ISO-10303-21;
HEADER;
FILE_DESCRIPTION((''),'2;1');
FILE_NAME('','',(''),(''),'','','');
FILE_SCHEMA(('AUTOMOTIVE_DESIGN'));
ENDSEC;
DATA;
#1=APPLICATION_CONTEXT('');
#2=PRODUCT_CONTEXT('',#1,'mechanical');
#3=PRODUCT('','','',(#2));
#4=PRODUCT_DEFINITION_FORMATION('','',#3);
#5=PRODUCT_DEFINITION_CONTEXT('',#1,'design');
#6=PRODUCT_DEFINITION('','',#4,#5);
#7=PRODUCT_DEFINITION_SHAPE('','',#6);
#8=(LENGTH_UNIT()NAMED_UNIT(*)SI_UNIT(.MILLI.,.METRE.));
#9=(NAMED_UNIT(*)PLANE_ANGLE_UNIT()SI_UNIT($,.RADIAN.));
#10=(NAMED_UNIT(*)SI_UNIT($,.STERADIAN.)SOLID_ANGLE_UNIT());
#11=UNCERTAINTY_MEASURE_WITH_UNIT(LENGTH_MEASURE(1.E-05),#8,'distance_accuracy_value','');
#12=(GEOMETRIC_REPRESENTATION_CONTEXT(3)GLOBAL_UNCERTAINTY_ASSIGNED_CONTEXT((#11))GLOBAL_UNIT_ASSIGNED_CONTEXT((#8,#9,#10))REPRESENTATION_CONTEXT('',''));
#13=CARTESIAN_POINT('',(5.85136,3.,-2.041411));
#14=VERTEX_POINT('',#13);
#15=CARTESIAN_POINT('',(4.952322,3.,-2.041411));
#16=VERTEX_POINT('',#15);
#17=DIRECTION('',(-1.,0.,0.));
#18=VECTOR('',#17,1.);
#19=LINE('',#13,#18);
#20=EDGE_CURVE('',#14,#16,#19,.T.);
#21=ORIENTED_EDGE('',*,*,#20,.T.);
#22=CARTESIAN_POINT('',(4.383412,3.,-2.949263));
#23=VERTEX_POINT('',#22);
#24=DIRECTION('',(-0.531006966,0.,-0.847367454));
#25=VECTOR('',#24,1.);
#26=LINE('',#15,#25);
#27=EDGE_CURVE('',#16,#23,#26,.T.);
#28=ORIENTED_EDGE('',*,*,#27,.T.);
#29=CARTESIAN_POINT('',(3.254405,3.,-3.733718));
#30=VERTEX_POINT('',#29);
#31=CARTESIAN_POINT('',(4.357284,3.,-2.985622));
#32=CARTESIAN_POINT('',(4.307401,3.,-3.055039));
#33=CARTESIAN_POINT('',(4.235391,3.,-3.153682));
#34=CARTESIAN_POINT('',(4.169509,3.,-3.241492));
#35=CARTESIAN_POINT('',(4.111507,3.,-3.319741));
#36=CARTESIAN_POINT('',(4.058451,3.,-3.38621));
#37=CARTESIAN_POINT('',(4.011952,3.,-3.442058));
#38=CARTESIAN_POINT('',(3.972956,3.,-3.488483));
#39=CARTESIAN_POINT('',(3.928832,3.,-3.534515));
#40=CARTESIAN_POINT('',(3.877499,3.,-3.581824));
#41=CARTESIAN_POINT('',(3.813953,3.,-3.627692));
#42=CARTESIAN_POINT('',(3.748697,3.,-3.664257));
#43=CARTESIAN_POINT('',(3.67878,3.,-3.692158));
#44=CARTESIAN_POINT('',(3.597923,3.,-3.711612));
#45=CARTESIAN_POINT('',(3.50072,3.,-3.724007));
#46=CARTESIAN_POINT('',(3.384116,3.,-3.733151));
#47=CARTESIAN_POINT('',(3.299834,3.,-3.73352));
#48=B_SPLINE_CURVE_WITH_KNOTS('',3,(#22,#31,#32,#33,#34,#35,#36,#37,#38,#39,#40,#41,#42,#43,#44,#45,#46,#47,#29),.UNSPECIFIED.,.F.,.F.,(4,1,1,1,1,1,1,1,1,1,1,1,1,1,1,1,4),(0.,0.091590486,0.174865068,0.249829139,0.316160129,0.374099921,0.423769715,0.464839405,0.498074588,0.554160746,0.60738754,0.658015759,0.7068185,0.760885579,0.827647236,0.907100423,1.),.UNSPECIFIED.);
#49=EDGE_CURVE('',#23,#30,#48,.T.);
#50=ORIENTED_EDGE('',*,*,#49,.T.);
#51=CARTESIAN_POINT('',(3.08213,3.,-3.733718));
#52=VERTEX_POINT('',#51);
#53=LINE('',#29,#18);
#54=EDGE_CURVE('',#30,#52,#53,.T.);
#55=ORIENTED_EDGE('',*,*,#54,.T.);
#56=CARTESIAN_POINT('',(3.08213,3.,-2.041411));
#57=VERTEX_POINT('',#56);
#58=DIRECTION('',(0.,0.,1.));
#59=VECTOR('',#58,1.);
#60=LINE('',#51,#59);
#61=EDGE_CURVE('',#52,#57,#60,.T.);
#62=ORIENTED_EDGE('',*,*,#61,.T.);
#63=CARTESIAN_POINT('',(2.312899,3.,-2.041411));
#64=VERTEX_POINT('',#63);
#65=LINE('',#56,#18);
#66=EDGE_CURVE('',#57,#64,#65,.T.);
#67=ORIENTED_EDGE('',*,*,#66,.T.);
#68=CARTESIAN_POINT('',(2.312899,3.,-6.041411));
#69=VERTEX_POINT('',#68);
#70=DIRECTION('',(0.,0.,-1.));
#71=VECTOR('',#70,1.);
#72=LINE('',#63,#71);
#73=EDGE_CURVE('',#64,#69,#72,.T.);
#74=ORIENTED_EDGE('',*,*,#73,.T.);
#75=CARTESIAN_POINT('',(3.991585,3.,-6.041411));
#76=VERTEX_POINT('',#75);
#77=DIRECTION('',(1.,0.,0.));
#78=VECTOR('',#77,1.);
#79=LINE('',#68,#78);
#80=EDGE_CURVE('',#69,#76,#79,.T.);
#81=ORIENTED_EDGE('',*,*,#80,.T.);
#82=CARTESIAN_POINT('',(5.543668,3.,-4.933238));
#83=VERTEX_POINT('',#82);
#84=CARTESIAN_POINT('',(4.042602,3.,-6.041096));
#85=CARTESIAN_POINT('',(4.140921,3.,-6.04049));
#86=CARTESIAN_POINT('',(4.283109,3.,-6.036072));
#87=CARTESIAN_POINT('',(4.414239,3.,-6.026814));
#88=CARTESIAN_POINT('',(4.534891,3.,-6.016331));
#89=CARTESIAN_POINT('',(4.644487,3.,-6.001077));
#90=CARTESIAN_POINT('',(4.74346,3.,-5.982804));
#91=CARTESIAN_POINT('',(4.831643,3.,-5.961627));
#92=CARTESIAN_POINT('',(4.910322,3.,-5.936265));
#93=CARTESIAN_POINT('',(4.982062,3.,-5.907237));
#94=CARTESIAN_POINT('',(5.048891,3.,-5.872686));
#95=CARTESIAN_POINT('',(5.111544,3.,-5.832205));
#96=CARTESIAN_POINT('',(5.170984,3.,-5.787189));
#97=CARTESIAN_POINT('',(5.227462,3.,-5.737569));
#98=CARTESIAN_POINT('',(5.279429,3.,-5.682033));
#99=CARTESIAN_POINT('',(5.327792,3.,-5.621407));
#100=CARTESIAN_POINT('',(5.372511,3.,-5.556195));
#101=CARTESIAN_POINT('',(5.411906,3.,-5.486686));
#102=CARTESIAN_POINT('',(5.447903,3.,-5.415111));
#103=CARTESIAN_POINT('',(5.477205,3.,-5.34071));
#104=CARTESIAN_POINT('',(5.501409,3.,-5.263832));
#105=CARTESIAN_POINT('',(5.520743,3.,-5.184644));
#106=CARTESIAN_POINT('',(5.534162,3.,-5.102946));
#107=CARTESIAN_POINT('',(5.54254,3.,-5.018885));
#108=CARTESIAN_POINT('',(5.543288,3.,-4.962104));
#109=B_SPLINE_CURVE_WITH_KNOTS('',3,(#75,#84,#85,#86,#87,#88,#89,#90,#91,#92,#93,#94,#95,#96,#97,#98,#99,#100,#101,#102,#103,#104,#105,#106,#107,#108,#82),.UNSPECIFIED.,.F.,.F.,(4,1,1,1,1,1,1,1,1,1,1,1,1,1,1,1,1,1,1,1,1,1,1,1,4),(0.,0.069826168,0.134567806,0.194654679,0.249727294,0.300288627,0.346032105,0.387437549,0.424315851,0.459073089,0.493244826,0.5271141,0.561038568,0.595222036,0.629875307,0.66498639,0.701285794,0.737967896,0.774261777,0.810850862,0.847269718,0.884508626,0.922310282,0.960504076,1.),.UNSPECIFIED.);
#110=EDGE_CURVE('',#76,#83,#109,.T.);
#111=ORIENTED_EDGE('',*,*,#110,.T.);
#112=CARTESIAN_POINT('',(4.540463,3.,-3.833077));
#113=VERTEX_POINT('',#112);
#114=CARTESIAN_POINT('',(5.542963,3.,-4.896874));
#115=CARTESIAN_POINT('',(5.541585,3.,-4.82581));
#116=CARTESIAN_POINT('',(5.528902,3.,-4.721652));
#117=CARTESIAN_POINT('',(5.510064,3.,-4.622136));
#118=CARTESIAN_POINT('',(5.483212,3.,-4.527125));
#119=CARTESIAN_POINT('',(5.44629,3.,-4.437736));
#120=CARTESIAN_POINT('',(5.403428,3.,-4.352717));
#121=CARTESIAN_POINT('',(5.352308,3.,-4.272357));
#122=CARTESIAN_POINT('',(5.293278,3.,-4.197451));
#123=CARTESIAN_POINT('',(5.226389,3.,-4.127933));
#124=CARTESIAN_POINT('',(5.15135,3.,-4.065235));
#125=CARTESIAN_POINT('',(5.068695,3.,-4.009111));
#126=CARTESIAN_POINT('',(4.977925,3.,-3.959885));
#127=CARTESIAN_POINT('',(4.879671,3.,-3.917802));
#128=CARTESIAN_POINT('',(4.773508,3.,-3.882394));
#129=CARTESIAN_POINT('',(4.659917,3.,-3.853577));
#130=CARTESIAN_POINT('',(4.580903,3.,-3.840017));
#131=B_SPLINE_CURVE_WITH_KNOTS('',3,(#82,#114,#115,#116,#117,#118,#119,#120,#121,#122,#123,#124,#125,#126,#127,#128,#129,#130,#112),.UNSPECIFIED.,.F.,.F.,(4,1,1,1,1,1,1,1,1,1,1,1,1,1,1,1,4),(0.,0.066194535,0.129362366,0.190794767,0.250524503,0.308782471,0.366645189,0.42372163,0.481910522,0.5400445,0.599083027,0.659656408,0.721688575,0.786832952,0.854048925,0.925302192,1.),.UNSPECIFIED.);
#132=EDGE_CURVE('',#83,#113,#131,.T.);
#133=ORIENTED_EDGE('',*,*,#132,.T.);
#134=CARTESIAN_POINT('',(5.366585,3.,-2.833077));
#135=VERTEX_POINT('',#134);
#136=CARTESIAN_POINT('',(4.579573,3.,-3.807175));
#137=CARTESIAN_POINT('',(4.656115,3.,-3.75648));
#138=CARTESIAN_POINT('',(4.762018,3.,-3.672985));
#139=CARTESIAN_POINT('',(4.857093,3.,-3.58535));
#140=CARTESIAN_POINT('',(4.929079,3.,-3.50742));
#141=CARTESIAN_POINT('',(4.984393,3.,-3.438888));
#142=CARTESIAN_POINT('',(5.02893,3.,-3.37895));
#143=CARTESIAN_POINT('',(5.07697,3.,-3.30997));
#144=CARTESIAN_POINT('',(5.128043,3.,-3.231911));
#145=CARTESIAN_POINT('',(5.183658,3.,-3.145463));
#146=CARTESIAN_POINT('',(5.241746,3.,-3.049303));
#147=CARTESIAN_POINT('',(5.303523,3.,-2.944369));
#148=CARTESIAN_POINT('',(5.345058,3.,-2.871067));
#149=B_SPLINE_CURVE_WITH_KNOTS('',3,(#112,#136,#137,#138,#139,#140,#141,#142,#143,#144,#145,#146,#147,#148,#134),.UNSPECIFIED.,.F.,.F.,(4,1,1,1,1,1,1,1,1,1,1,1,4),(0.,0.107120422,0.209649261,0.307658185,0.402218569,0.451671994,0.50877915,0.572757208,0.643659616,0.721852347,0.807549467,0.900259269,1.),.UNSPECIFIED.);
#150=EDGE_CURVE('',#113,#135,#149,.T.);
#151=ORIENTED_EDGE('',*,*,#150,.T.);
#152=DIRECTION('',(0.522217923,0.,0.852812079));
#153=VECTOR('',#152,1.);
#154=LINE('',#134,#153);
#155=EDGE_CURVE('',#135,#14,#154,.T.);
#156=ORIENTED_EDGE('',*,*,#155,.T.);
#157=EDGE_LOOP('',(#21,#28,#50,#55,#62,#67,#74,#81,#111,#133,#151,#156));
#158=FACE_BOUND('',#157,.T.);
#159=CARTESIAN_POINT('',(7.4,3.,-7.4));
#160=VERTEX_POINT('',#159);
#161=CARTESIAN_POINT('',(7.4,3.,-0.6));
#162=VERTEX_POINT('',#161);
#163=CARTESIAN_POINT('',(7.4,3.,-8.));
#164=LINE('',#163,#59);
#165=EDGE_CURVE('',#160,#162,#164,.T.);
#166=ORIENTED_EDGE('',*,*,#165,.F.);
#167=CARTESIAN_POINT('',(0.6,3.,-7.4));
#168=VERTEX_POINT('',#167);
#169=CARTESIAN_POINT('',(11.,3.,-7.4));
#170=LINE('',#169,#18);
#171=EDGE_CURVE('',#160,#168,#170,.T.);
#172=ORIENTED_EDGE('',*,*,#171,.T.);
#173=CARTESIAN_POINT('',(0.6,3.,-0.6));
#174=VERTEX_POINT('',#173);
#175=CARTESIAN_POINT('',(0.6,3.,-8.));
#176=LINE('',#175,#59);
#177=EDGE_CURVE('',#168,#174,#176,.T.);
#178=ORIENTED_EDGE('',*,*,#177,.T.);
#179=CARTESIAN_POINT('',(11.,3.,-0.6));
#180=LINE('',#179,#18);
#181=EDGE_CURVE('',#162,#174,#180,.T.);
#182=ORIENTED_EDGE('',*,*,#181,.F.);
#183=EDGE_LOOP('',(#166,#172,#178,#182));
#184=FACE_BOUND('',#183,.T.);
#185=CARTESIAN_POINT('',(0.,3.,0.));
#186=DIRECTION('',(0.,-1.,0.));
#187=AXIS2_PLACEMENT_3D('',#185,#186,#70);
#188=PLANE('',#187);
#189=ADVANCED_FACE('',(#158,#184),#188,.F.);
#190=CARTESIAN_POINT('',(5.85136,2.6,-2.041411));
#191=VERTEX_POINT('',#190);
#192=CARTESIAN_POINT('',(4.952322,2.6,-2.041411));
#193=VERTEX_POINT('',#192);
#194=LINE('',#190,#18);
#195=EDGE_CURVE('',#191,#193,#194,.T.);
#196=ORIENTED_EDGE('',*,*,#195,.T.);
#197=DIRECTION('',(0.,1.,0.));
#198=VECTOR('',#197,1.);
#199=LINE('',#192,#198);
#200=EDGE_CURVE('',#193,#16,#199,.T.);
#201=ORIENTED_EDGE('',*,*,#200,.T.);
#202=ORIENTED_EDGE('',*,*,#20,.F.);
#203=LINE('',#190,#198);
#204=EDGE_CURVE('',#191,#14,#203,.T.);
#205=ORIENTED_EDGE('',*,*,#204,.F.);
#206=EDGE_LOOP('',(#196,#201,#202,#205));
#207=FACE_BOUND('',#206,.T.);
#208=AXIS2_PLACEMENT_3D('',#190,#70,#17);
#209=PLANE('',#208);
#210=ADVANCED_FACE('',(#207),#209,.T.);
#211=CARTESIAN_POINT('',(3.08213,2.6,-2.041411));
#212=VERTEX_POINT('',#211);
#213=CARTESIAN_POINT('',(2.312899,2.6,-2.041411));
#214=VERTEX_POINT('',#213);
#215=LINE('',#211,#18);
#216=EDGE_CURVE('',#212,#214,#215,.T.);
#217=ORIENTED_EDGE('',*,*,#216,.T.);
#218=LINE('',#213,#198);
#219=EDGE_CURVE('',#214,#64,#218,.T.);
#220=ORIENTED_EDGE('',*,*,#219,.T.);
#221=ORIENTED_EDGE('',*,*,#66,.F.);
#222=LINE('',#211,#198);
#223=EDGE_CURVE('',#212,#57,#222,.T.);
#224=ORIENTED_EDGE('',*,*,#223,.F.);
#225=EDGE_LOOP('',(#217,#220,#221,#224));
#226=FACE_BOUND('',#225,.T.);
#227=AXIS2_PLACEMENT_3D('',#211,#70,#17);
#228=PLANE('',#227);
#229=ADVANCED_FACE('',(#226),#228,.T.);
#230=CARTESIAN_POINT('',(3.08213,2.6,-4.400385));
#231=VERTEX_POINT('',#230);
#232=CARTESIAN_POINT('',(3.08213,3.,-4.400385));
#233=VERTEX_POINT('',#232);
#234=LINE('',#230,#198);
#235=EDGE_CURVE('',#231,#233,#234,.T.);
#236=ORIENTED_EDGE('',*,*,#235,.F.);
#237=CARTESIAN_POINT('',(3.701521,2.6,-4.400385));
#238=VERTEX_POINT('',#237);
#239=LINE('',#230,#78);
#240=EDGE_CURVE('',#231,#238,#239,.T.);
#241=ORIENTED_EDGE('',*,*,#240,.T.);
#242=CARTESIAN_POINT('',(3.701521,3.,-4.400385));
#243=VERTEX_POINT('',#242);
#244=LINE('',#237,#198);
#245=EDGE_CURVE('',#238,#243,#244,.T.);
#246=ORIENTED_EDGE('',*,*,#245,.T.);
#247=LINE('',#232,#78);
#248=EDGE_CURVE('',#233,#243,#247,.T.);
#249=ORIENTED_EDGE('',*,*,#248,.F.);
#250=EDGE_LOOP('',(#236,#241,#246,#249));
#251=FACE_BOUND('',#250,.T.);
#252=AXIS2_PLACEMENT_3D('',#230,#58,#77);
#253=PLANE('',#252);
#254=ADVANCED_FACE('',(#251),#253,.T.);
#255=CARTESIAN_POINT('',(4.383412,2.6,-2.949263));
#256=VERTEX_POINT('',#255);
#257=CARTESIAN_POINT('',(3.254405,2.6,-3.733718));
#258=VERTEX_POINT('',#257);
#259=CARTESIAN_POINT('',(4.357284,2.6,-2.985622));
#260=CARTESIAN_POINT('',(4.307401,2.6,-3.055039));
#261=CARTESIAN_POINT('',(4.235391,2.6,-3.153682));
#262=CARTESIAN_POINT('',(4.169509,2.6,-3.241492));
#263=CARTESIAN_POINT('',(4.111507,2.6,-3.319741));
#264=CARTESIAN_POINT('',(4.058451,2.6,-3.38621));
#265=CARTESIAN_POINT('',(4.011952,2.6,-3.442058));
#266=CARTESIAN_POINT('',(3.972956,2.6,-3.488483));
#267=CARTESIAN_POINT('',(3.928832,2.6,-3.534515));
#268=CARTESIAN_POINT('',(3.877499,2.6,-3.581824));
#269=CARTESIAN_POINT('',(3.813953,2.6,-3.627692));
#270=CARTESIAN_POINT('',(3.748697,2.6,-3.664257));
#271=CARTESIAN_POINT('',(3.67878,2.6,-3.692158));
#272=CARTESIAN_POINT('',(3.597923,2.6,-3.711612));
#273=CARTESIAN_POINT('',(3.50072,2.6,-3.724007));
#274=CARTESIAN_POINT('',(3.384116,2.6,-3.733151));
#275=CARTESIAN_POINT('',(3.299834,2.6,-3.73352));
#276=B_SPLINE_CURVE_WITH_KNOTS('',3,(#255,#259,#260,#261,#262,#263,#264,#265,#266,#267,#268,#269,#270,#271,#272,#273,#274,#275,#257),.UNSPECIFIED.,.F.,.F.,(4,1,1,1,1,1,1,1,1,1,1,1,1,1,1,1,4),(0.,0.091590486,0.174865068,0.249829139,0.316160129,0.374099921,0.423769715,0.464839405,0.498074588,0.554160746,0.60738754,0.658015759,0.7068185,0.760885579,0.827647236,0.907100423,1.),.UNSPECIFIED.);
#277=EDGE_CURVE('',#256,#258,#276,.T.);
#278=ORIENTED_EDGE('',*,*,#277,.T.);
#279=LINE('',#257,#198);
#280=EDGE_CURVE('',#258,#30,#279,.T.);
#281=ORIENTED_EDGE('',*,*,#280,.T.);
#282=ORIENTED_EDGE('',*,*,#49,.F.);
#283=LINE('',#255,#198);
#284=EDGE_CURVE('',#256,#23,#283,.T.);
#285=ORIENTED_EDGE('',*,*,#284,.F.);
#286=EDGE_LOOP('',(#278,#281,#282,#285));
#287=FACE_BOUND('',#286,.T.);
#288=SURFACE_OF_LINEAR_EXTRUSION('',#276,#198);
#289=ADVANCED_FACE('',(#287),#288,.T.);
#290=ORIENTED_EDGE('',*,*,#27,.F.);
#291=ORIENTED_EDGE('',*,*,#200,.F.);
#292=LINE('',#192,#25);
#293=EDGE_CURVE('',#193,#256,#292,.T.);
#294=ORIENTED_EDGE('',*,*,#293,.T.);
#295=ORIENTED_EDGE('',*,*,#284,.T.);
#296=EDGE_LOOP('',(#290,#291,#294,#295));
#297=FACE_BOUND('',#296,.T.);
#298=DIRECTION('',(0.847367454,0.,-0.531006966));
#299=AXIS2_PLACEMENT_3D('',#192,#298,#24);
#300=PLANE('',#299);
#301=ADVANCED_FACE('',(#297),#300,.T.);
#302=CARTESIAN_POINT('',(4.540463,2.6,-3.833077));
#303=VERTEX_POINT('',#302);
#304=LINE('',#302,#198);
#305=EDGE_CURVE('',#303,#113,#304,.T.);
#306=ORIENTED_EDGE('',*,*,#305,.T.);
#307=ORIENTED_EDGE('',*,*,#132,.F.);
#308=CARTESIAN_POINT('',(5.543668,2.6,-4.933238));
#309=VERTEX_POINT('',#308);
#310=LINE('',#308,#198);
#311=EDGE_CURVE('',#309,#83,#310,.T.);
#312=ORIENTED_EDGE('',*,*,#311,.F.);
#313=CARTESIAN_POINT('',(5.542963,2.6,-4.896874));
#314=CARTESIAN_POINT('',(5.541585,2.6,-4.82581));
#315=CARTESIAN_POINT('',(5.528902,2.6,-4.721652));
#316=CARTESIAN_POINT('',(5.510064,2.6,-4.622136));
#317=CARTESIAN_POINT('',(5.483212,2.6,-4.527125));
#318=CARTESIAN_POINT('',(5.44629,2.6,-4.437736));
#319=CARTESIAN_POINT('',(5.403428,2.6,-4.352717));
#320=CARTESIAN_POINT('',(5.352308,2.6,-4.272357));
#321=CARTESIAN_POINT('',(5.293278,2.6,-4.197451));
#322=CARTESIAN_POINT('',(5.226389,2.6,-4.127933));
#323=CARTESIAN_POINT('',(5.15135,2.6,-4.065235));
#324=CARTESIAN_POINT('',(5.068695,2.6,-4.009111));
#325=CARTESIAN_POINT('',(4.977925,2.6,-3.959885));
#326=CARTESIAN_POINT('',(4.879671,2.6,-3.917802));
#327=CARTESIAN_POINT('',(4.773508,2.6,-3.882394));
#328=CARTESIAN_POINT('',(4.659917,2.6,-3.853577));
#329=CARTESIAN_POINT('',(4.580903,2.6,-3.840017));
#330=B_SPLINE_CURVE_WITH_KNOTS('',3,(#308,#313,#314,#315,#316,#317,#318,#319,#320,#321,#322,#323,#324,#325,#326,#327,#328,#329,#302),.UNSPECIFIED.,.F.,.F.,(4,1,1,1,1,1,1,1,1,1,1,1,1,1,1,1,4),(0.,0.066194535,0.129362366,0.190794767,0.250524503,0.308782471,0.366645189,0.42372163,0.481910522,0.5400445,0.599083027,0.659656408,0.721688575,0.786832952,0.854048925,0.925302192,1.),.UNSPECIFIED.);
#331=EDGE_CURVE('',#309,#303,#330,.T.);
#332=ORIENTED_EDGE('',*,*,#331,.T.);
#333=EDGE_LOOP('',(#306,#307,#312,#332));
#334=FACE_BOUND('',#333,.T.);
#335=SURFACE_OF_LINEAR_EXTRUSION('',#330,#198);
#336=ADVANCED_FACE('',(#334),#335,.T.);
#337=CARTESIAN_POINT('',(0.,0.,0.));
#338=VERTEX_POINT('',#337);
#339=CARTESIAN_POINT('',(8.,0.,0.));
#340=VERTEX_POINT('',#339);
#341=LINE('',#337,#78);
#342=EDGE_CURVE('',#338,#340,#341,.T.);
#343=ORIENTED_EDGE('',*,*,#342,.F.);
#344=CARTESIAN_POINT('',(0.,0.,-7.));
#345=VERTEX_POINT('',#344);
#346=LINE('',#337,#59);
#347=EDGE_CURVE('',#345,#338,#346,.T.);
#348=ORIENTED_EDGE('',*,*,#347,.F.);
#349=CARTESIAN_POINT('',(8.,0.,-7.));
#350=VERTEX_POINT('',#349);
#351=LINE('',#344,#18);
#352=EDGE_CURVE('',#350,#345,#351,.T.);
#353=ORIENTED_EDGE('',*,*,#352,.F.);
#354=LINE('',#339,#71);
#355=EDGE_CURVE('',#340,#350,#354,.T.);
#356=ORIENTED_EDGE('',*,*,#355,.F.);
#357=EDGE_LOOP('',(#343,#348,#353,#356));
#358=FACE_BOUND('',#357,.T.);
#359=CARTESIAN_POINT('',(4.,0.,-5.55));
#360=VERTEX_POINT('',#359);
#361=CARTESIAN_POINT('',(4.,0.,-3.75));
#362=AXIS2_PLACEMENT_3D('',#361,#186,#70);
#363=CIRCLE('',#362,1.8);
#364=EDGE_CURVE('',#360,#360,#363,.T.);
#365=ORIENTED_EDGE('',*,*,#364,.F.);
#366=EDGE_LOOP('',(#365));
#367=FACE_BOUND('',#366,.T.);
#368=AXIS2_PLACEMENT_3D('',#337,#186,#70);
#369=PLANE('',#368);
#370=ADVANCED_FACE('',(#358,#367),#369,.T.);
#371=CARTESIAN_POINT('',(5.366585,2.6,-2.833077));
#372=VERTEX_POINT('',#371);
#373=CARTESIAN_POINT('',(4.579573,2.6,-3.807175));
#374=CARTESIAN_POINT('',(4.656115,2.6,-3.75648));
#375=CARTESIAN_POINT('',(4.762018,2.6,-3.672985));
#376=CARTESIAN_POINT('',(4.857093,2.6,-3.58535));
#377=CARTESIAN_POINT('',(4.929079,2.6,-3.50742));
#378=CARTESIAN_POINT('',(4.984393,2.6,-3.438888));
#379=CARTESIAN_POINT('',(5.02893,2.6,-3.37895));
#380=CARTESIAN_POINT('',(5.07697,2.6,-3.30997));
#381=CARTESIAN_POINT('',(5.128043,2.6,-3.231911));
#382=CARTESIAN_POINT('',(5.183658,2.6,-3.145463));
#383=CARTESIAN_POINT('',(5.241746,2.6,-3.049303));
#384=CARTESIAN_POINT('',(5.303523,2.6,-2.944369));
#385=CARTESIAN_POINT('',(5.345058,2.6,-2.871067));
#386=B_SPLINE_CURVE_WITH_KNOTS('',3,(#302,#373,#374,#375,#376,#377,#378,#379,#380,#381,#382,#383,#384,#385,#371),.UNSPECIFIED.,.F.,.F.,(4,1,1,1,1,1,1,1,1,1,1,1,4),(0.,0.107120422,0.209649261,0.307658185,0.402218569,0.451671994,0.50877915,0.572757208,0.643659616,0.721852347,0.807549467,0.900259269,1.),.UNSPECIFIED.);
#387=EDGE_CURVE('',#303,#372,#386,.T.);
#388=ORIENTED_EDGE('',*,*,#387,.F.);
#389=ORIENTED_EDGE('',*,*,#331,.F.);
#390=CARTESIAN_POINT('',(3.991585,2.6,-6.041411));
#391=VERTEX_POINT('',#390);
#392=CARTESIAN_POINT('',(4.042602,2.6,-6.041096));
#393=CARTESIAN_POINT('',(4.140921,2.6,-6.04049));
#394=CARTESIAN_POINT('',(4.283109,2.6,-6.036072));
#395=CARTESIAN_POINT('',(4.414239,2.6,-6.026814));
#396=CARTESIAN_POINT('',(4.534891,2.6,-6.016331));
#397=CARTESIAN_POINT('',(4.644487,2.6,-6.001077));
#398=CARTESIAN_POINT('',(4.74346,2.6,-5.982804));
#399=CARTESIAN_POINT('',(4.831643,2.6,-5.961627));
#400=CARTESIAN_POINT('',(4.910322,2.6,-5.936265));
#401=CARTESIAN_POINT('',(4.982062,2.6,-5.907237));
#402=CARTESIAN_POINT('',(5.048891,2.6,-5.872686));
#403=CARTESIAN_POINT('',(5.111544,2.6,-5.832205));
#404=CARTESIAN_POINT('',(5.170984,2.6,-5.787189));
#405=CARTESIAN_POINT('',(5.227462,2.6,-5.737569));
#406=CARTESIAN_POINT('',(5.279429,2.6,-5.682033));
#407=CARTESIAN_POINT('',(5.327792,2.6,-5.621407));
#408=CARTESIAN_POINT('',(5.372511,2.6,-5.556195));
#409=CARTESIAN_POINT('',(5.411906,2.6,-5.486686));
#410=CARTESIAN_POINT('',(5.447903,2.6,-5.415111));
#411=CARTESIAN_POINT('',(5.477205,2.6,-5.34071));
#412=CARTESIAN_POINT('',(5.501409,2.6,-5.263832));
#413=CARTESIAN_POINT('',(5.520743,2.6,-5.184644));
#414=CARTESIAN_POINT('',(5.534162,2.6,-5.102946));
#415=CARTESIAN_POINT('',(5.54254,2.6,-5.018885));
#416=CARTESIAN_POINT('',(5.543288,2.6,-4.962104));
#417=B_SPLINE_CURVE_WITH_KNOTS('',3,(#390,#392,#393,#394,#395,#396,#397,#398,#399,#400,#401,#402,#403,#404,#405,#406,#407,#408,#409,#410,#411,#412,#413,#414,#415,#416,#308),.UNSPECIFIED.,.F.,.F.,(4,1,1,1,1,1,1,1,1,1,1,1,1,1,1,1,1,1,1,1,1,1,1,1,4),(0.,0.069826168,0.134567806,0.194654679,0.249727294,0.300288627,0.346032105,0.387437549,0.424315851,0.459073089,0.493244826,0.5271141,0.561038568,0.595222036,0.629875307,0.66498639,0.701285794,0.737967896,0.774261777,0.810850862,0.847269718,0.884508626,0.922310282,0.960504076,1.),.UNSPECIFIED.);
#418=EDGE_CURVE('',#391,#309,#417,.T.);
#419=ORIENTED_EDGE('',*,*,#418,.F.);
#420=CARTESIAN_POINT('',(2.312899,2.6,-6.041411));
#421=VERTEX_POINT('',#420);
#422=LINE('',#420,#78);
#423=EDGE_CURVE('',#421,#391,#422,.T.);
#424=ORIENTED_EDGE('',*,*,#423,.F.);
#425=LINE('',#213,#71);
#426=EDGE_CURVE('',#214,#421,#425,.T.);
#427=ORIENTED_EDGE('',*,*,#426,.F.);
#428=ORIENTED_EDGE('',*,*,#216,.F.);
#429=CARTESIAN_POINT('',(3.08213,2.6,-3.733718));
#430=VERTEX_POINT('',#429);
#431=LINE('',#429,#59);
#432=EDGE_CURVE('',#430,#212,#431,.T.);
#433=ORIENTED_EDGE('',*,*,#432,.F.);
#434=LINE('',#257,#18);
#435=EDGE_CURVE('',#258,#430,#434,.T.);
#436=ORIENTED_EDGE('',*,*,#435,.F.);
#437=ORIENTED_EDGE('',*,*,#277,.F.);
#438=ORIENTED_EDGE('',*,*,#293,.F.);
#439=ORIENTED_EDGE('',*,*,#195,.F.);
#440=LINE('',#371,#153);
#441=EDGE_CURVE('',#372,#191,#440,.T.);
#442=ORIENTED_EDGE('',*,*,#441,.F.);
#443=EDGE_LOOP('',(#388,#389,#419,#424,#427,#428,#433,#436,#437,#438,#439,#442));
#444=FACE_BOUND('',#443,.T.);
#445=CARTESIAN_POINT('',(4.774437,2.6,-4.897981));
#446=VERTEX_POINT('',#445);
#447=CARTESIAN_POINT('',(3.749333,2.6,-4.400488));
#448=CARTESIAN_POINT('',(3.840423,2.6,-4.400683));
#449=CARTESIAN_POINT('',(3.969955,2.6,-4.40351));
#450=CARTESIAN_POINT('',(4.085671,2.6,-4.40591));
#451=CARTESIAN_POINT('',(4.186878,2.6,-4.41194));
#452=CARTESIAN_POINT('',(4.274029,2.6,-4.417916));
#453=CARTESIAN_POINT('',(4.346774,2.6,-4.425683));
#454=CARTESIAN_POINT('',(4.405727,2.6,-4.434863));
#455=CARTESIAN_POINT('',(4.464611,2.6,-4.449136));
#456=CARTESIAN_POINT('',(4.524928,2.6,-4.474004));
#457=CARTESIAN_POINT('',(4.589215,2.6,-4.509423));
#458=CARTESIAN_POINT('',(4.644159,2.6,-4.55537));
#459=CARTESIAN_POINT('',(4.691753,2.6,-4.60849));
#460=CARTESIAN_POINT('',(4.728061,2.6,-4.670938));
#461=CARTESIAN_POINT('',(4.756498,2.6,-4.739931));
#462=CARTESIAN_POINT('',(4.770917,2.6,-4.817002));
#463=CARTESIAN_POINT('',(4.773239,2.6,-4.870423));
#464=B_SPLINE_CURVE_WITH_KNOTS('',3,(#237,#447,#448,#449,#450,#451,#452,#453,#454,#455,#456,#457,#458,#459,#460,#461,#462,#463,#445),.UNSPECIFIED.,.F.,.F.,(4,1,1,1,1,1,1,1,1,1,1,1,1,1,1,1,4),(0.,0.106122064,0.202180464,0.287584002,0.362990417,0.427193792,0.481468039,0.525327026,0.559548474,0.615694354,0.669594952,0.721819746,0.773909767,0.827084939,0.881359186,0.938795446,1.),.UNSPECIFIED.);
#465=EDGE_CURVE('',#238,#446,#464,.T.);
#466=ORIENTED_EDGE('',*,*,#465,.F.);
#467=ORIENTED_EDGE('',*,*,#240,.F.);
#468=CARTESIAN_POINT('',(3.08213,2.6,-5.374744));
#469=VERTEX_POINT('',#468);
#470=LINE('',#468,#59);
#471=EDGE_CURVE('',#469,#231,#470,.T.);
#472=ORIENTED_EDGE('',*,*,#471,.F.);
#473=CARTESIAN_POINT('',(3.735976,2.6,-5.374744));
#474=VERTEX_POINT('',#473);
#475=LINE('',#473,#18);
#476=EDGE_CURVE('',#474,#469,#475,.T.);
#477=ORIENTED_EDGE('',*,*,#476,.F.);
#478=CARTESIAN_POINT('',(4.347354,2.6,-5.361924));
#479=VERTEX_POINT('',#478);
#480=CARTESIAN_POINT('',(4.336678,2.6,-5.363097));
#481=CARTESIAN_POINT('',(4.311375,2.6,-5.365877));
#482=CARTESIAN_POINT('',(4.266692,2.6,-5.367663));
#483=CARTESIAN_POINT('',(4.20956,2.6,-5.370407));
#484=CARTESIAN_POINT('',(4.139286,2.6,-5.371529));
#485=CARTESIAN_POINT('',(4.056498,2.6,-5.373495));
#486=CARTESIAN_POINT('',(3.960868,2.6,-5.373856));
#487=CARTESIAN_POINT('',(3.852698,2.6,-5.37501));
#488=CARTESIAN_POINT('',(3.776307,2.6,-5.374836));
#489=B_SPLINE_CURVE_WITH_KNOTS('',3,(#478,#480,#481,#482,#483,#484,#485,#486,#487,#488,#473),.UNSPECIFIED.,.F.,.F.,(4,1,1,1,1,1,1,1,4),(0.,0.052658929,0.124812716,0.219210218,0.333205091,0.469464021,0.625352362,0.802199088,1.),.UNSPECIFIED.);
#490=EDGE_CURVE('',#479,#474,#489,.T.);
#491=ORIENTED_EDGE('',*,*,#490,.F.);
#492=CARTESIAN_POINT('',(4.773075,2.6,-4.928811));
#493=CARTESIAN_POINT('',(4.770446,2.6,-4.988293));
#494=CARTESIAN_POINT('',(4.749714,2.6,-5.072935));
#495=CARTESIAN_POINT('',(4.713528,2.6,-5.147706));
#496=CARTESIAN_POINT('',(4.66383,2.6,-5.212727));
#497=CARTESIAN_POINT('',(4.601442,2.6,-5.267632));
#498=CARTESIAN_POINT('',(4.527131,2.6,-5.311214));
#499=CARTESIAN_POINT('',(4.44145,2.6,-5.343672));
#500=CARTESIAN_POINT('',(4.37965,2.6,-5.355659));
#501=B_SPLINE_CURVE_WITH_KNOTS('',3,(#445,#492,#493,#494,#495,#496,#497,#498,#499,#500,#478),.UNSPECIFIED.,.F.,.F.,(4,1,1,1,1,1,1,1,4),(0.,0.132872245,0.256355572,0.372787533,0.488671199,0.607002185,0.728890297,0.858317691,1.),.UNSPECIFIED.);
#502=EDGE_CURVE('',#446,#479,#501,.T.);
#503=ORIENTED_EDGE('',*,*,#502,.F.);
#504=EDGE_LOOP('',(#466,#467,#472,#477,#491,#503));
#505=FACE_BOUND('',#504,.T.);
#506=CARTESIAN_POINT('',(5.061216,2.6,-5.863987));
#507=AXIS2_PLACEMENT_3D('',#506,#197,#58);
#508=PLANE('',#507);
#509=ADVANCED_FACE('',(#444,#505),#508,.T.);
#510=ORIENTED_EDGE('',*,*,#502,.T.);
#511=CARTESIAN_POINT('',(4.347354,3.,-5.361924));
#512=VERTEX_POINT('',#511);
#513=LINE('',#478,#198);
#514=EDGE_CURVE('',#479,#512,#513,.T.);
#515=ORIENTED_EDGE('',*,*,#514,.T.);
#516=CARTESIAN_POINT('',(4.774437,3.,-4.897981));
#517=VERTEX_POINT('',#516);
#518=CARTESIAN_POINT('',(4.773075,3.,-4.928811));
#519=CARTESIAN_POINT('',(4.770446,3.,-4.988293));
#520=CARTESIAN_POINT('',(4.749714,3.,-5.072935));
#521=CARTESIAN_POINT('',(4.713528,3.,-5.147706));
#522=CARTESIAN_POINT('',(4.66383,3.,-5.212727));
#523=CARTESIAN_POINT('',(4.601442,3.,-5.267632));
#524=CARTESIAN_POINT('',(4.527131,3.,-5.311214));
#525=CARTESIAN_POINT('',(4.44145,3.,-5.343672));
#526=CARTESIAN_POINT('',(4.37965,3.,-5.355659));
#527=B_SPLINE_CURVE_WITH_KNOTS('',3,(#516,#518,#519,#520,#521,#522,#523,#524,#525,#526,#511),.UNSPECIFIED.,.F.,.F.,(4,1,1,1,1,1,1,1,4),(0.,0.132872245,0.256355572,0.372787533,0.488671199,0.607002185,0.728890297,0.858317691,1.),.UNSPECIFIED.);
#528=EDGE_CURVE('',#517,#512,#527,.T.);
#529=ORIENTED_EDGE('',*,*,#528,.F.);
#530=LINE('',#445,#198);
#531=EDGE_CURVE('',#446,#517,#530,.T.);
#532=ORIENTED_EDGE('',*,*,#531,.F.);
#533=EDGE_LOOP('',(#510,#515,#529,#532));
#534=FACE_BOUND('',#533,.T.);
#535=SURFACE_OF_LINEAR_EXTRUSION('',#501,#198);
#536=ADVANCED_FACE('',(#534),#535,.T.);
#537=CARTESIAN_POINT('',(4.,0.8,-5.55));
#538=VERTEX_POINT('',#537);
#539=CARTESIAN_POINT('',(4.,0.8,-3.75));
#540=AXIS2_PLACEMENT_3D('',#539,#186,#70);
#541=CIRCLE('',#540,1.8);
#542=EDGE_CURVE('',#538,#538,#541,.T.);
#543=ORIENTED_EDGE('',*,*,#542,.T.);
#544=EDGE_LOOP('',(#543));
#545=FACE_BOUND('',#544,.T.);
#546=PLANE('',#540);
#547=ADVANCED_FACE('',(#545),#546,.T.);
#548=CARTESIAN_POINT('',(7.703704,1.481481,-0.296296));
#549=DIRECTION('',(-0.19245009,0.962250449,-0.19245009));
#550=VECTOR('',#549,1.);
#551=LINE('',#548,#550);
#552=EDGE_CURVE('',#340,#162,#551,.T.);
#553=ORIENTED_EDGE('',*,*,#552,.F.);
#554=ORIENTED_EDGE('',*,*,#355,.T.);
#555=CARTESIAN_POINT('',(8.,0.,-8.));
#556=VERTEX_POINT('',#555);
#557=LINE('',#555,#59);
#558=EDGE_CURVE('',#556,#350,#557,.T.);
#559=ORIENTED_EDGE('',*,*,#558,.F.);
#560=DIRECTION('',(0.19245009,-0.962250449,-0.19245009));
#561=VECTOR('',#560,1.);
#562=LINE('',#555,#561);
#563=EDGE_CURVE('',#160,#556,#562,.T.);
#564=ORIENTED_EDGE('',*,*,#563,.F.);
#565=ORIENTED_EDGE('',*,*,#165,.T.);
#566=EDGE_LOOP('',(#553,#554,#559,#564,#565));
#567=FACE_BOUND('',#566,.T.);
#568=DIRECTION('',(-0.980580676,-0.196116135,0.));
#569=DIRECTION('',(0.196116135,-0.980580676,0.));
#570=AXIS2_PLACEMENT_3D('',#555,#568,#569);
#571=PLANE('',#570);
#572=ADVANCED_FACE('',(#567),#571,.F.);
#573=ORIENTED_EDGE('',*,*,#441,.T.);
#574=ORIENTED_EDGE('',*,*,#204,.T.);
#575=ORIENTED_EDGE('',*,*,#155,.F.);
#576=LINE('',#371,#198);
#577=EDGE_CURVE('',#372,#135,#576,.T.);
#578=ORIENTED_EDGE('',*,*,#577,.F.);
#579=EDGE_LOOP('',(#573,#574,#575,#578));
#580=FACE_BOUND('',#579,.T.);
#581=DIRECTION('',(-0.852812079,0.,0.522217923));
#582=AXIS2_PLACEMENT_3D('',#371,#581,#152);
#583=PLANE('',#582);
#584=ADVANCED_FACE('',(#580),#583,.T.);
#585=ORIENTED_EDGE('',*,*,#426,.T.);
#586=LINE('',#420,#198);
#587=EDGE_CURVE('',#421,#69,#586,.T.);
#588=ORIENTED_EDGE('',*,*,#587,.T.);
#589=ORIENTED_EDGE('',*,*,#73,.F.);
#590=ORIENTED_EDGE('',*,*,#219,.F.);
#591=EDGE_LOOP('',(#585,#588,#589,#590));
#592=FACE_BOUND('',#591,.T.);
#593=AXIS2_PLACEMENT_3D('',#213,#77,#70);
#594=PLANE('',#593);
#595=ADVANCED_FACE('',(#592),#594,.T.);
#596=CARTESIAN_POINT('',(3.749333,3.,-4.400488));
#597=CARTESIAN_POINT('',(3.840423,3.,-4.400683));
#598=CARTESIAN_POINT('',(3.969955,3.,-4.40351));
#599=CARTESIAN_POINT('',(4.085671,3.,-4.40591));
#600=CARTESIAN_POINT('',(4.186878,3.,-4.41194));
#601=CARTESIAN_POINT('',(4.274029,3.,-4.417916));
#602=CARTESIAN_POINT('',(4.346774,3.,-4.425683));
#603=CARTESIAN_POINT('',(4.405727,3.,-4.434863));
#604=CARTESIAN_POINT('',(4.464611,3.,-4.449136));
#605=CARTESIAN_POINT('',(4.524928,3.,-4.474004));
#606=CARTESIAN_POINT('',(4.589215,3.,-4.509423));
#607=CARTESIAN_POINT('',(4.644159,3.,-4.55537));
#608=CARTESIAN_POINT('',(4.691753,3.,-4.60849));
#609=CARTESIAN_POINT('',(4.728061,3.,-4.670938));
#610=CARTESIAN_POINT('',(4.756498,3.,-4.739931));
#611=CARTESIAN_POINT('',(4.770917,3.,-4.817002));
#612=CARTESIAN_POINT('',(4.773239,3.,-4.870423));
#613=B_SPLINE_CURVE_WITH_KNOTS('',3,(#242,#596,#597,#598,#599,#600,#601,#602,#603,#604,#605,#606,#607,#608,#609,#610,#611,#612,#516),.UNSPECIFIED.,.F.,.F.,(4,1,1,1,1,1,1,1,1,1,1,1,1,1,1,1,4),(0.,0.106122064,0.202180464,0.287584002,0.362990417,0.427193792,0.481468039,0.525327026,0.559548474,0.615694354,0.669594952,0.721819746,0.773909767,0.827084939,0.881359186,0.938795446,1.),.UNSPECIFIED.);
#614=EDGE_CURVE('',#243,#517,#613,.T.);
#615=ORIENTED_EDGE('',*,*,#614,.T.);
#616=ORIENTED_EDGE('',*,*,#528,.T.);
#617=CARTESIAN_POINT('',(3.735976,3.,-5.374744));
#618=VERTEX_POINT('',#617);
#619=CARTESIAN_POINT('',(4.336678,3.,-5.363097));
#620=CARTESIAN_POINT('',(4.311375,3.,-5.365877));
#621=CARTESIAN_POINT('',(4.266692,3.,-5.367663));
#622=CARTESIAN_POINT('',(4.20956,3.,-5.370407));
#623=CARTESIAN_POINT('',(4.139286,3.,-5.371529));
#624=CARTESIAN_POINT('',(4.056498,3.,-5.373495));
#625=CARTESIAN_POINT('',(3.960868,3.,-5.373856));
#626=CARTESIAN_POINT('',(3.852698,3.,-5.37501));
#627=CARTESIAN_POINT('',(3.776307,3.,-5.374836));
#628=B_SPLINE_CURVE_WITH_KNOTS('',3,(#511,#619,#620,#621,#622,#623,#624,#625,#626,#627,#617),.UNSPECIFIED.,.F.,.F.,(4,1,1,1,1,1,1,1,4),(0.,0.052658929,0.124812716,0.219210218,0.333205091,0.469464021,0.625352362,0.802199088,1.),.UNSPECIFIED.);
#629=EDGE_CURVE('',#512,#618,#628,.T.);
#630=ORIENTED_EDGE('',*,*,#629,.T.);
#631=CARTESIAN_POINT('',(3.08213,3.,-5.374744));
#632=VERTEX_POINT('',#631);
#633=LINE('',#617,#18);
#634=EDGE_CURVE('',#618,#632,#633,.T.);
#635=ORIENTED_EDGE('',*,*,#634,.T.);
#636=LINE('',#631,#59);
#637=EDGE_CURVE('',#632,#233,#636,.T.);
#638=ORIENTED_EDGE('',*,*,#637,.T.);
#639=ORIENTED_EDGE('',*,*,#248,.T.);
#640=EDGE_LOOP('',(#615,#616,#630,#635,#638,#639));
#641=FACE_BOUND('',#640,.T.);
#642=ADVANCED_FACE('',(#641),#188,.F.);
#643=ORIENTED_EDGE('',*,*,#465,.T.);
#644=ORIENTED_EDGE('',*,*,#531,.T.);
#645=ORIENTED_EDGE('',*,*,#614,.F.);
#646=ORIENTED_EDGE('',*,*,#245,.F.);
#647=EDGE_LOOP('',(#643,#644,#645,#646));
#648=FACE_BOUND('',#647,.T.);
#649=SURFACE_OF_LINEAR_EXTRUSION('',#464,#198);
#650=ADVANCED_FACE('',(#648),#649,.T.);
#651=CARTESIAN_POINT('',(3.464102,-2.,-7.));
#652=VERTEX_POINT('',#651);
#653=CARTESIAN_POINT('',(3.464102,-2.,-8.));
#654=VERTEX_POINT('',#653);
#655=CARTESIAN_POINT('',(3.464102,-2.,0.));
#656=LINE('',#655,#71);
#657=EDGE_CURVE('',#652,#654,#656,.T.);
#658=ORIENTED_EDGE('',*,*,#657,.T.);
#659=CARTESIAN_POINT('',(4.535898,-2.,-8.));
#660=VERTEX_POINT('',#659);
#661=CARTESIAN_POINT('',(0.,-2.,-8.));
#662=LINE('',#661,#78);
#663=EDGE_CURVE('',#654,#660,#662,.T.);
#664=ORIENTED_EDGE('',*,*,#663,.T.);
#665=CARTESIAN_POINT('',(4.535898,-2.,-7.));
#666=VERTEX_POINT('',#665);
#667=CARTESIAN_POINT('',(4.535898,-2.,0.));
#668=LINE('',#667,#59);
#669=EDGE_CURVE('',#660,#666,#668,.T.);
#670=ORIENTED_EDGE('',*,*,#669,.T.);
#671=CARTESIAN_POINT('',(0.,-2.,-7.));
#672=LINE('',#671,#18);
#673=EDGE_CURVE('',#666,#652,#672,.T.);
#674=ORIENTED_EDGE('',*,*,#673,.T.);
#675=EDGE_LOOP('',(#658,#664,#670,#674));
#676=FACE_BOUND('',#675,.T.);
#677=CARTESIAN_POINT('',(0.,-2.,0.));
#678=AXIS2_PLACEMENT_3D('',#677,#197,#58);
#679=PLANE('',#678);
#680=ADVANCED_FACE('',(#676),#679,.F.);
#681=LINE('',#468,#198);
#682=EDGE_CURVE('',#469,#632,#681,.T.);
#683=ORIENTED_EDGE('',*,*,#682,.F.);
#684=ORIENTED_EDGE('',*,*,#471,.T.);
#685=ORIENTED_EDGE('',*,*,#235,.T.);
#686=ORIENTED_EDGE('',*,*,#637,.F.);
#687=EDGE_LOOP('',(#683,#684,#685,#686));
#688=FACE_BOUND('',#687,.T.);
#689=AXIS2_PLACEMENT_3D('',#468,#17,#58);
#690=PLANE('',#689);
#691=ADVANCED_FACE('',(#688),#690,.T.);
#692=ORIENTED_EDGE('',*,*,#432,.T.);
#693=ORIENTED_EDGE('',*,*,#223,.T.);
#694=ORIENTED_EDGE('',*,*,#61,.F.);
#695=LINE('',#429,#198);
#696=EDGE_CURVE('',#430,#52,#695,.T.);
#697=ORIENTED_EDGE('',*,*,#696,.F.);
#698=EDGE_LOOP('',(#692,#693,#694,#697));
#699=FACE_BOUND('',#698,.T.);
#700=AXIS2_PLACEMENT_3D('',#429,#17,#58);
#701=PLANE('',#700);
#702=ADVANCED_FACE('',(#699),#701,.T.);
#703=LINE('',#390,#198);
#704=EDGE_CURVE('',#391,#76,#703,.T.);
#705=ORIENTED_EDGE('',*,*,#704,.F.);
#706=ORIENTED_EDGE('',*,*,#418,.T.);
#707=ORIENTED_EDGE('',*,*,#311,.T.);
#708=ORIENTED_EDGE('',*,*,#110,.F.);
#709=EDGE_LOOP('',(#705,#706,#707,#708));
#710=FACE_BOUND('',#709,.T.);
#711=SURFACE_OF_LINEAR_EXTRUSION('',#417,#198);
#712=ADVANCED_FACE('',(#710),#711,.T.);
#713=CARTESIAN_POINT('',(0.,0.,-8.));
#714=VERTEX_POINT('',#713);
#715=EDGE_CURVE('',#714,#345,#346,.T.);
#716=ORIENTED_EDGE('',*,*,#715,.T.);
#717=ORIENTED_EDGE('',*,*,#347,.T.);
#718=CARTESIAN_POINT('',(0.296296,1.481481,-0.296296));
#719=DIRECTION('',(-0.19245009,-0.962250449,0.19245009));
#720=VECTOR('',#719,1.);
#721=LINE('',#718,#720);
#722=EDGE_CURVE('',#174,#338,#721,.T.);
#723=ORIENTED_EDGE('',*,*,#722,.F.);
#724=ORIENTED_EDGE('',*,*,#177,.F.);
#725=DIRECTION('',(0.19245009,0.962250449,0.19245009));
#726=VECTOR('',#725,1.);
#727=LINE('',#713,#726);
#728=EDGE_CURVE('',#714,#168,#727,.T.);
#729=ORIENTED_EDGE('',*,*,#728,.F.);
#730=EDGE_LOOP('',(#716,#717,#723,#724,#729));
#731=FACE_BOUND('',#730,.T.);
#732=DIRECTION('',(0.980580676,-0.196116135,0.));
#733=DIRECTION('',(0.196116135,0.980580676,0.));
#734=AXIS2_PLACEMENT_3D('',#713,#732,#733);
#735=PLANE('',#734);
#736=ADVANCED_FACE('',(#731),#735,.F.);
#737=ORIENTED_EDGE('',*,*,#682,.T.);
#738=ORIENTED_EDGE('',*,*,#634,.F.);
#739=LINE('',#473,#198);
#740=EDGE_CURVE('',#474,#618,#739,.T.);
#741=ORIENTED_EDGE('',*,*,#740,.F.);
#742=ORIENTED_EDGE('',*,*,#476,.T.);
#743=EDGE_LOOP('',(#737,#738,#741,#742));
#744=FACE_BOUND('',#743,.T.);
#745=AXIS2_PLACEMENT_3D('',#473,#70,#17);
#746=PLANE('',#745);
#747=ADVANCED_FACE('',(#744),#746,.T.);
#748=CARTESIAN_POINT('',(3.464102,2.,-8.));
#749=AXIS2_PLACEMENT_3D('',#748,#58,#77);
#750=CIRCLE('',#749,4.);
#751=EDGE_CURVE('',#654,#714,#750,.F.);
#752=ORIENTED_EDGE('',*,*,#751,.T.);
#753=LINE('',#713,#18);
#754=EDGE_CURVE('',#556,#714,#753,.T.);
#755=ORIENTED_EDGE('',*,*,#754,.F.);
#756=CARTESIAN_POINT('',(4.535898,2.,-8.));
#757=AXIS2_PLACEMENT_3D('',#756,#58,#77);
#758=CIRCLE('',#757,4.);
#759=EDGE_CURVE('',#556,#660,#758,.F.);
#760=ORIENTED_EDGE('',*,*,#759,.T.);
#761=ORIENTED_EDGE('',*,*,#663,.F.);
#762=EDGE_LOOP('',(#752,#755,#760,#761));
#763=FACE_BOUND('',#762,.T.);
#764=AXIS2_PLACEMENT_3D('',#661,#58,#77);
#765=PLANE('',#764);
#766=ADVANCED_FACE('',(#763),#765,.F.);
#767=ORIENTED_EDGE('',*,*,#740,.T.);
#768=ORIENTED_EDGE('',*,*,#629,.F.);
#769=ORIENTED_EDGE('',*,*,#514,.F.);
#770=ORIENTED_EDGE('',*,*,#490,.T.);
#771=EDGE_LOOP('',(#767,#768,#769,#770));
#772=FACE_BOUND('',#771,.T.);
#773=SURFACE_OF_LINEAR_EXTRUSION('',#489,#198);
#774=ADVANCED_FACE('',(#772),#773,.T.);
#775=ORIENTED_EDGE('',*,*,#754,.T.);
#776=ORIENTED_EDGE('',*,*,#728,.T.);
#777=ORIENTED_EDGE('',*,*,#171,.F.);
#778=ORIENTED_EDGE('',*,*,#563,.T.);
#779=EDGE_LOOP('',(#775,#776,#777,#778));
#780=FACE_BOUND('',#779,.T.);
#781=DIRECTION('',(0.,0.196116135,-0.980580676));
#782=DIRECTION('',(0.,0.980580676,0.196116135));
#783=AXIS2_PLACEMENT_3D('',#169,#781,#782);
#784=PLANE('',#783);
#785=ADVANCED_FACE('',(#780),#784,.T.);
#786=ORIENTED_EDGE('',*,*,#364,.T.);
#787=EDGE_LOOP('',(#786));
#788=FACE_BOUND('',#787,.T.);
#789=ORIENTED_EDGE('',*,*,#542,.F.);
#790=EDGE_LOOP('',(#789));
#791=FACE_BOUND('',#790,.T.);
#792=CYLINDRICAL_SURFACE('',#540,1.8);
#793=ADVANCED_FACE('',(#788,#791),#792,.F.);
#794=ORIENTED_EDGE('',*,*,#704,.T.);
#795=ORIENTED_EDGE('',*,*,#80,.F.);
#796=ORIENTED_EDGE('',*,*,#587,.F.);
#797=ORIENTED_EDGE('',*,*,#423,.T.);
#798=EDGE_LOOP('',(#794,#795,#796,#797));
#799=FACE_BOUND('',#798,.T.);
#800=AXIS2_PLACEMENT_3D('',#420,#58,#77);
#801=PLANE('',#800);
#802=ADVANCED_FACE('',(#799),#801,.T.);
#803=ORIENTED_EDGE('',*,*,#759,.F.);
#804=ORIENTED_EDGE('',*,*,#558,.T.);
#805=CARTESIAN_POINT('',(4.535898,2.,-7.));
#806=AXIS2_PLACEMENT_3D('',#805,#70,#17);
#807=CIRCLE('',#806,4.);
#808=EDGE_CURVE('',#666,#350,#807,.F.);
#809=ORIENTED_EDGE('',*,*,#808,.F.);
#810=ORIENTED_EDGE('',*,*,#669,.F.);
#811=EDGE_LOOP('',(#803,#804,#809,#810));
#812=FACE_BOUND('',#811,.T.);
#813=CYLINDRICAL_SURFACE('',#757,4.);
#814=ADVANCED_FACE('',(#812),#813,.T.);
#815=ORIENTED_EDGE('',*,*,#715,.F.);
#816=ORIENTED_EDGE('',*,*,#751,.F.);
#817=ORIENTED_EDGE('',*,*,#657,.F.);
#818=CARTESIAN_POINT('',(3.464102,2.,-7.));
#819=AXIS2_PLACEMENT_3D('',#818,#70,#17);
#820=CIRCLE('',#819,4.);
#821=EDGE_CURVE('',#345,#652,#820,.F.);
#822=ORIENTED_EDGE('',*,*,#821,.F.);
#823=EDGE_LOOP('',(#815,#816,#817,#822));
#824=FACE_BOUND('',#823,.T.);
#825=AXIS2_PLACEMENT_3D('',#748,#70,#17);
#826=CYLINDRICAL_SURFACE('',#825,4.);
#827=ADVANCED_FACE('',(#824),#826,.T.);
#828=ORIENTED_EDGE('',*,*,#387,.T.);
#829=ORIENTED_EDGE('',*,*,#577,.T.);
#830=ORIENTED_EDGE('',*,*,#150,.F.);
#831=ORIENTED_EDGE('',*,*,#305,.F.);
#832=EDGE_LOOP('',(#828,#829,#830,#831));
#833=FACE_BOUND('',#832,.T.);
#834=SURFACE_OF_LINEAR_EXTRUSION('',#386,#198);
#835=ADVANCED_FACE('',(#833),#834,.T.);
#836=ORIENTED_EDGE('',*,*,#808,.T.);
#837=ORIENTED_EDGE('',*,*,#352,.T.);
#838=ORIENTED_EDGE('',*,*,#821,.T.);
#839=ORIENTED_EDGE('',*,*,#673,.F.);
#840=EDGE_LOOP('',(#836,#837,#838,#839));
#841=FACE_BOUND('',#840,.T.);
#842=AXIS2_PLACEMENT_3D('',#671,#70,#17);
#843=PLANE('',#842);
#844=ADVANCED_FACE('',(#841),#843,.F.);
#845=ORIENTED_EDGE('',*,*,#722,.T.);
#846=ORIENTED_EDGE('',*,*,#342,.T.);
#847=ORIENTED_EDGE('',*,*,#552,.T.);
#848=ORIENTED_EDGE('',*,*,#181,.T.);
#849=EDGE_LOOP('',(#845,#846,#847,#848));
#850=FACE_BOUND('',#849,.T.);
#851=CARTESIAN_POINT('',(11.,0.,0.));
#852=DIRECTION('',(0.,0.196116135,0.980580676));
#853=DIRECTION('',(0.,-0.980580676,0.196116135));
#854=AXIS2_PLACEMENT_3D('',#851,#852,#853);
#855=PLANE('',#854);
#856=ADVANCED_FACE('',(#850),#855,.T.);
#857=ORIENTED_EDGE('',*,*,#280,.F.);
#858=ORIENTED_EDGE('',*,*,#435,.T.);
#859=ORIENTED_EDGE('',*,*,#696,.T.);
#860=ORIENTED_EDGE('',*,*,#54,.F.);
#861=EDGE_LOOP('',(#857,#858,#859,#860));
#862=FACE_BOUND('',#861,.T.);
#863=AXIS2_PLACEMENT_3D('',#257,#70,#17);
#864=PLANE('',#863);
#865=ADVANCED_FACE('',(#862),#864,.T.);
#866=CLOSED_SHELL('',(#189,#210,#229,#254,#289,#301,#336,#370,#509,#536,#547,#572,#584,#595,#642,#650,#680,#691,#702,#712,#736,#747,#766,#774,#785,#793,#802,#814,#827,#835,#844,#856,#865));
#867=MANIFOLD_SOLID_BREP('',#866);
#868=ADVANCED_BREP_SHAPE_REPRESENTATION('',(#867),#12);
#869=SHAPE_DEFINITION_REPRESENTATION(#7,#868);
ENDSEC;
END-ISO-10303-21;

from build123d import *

# Parameters (mm, degrees)
SKETCH1_W               = 8
SKETCH1_H               = 8
BOSS_EXTRUDE1_DEPTH     = 3
CUT_EXTRUDE1_DEPTH      = 12.704699911
CUT_EXTRUDE1_DEPTH_BACK = 12.704699911
CUT_EXTRUDE2_DEPTH      = 11
SKETCH4_R               = 1.8
CUT_EXTRUDE3_DEPTH      = 0.8
SKETCH5_W               = 8
SKETCH5_H               = 1
BOSS_EXTRUDE2_DEPTH     = 2
FILLET1_R               = 4
CUT_EXTRUDE4_DEPTH      = 0.4


with BuildPart() as part:
    # Sketch1 → Boss-Extrude1 (new body)
    with BuildSketch(Plane(origin=(0, 0, 0), x_dir=(1, 0, 0), z_dir=(0, 1, 0))):
        with Locations((4, 4)):
            Rectangle(SKETCH1_W, SKETCH1_H)
    extrude(amount=BOSS_EXTRUDE1_DEPTH)

    # Sketch2 → Cut-Extrude1 (cut, two sides: drawn at the far end of the back side and taken through both)
    with BuildSketch(Plane.XY.offset(-CUT_EXTRUDE1_DEPTH_BACK)):
        Polygon((0, 0), (0.6, 3), (0, 3), align=None)
        Polygon((8, 0), (7.4, 3), (8, 3), align=None)
    extrude(amount=CUT_EXTRUDE1_DEPTH + CUT_EXTRUDE1_DEPTH_BACK, mode=Mode.SUBTRACT)

    # Sketch3 → Cut-Extrude2 (cut)
    with BuildSketch(Plane(origin=(0, 0, 0), x_dir=(0, 0, -1), z_dir=(1, 0, 0))):
        Polygon((0, 0), (0.6, 3), (0, 3), align=None)
        Polygon((8, 3), (7.4, 3), (8, 0), align=None)
    extrude(amount=CUT_EXTRUDE2_DEPTH, mode=Mode.SUBTRACT)

    # Sketch4 → Cut-Extrude3 (cut)
    with BuildSketch(Plane.XZ):
        with Locations(Location((4, -3.75, 0), (0, 0, 270))):
            Circle(SKETCH4_R)
    extrude(amount=-CUT_EXTRUDE3_DEPTH, mode=Mode.SUBTRACT)

    # Sketch5 → Boss-Extrude2 (add)
    with BuildSketch(Plane.XZ):
        with Locations((4, -7.5)):
            Rectangle(SKETCH5_W, SKETCH5_H)
    extrude(amount=BOSS_EXTRUDE2_DEPTH)

    # Fillet1
    # the kernel refuses this fillet: 4 mm, written as the material it takes off along each edge
    with BuildSketch(Plane(origin=(8, -2, -16.660254038), x_dir=(0, 1, 0), z_dir=(0, 0, 1)), Plane(origin=(0, -2, 1.660254038), x_dir=(0, 1, 0), z_dir=(0, 0, -1))) as fillet1_piece_1:
        with BuildLine():
            CenterArc((4, 3.464101615), FILLET1_R, 180, 60)
            Line((0, 3.464101615), (-0.08, 3.464101615))
            Line((-0.08, 3.464101615), (-0.08, 0))
            Line((-0.08, 0), (0, -0.08))
            ThreePointArc((0, -0.08), (1, -0.08), (1.96, -0.069282032))
            Line((1.96, -0.069282032), (2, 0))
        make_face()
    extrude(amount=18.320508076, mode=Mode.SUBTRACT)

    # Sketch6 → Cut-Extrude4 (cut)
    with BuildSketch(Plane(origin=(0, 3, 0), x_dir=(1, 0, 0), z_dir=(0, 1, 0))):
        with BuildLine():
            Line((2.312898911, 2.041410717), (2.312898911, 6.041410717))
            Line((2.312898911, 6.041410717), (3.991584808, 6.041410717))
            add(Edge.make_bspline(
                [(3.991584808, 6.041410717), (4.042601732, 6.041096301), (4.140920681, 6.040490364), (4.283109063, 6.036071747), (4.414238667, 6.026814487), (4.534891188, 6.016330564), (4.644487122, 6.001077132), (4.74345979, 5.982803671), (4.831642566, 5.961627249), (4.910322089, 5.936265049), (4.982061831, 5.90723713), (5.04889092, 5.87268574), (5.111544162, 5.83220454), (5.170983849, 5.787188805), (5.227461685, 5.737569368), (5.279429347, 5.682033053), (5.32779225, 5.621406813), (5.372511371, 5.556195062), (5.411906117, 5.48668575), (5.447902572, 5.415111184), (5.477205044, 5.340709703), (5.50140862, 5.263831792), (5.52074281, 5.184644366), (5.534162371, 5.102946099), (5.542540058, 5.018884869), (5.543287935, 4.962103945), (5.543668142, 4.93323764)],
                knots=[0, 0, 0, 0, 1.675828044, 3.229627355, 4.67171229, 5.993455049, 7.206927059, 8.304770529, 9.29850117, 10.183580433, 11.017754134, 11.837875825, 12.650738409, 13.464925643, 14.285328857, 15.117007378, 15.959673368, 16.830859064, 17.711229498, 18.58228265, 19.460420693, 20.334473227, 21.228207035, 22.135446768, 23.052097822, 24, 24, 24, 24], degree=3))
            add(Edge.make_bspline(
                [(5.543668142, 4.93323764), (5.542962916, 4.896874176), (5.541584712, 4.825809944), (5.528901745, 4.721651895), (5.5100643, 4.622136315), (5.483211668, 4.527125334), (5.446289845, 4.437736414), (5.403428122, 4.352717347), (5.352308317, 4.272356517), (5.293277733, 4.19745058), (5.226389218, 4.127933229), (5.151349641, 4.065235076), (5.06869476, 4.009111084), (4.977924564, 3.959884897), (4.879671091, 3.917801842), (4.77350828, 3.882394441), (4.659916733, 3.853576761), (4.580902516, 3.840017181), (4.540463013, 3.833077384)],
                knots=[0, 0, 0, 0, 1.05911256, 2.069797862, 3.05271628, 4.008392045, 4.940519534, 5.866323021, 6.779546087, 7.71056835, 8.640711998, 9.585328432, 10.554502533, 11.547017206, 12.589327225, 13.664782803, 14.804835066, 16, 16, 16, 16], degree=3))
            add(Edge.make_bspline(
                [(4.540463013, 3.833077384), (4.579572554, 3.807174767), (4.656115253, 3.756479818), (4.762017587, 3.672984601), (4.857092756, 3.585349912), (4.929078878, 3.507419696), (4.984392794, 3.438888442), (5.028929947, 3.378950347), (5.076970406, 3.309970293), (5.128042999, 3.231910907), (5.183657562, 3.145462828), (5.241745689, 3.049302835), (5.303522957, 2.944368887), (5.345058377, 2.871067212), (5.366584808, 2.833077384)],
                knots=[0, 0, 0, 0, 1.285445069, 2.515791127, 3.691898215, 4.826622834, 5.420063933, 6.105349801, 6.873086501, 7.723915395, 8.66222816, 9.690593598, 10.803111229, 12, 12, 12, 12], degree=3))
            Line((5.366584808, 2.833077384), (5.851360449, 2.041410717))
            Line((5.851360449, 2.041410717), (4.952321988, 2.041410717))
            Line((4.952321988, 2.041410717), (4.383411731, 2.949263281))
            add(Edge.make_bspline(
                [(4.383411731, 2.949263281), (4.357283981, 2.985622121), (4.307400733, 3.055038622), (4.235391184, 3.153681722), (4.169508837, 3.241491798), (4.111507042, 3.319740728), (4.058450932, 3.386209972), (4.011951502, 3.442057857), (3.972955886, 3.488482798), (3.928832249, 3.534515131), (3.877499082, 3.581823547), (3.813952721, 3.627691749), (3.748696505, 3.664257396), (3.678779681, 3.692157844), (3.597922987, 3.71161189), (3.500720436, 3.724006591), (3.384115753, 3.733151261), (3.299833928, 3.733519777), (3.254405321, 3.73371841)],
                knots=[0, 0, 0, 0, 1.465447777, 2.797841088, 3.997266218, 5.05856206, 5.985598736, 6.780315439, 7.437430484, 7.969193402, 8.866571936, 9.718200644, 10.52825214, 11.309096006, 12.174169268, 13.242355782, 14.513606761, 16, 16, 16, 16], degree=3))
            Line((3.254405321, 3.73371841), (3.08212968, 3.73371841))
            Line((3.08212968, 3.73371841), (3.08212968, 2.041410717))
            Line((3.08212968, 2.041410717), (2.312898911, 2.041410717))
        make_face()
        with BuildLine():
            Line((3.08212968, 4.400385076), (3.701520706, 4.400385076))
            add(Edge.make_bspline(
                [(3.701520706, 4.400385076), (3.749332843, 4.400487541), (3.840423044, 4.400682752), (3.969955122, 4.403510317), (4.085670885, 4.405910235), (4.186877859, 4.411940131), (4.274028855, 4.417916326), (4.346774263, 4.425683211), (4.405726987, 4.434863419), (4.464610849, 4.449136231), (4.52492793, 4.474003789), (4.589214527, 4.509422512), (4.644158691, 4.555370201), (4.691753027, 4.608490376), (4.728060837, 4.670937972), (4.756498441, 4.739930879), (4.770916908, 4.817002181), (4.773239296, 4.87042263), (4.774437372, 4.89798123)],
                knots=[0, 0, 0, 0, 1.697953026, 3.23488743, 4.60134403, 5.807846676, 6.835100678, 7.703488618, 8.405232423, 8.952775585, 9.851109663, 10.713519226, 11.549115941, 12.382556273, 13.233359028, 14.101746968, 15.020727134, 16, 16, 16, 16], degree=3))
            add(Edge.make_bspline(
                [(4.774437372, 4.89798123), (4.773074786, 4.928811222), (4.770445895, 4.98829272), (4.749714088, 5.072935459), (4.713527564, 5.147705664), (4.663829732, 5.212726785), (4.601441933, 5.267631557), (4.527131165, 5.311213996), (4.441449505, 5.343672387), (4.379650359, 5.355659208), (4.347354039, 5.361923538)],
                knots=[0, 0, 0, 0, 1.062977961, 2.050844577, 2.982300261, 3.90936959, 4.856017476, 5.831122378, 6.86654153, 8, 8, 8, 8], degree=3))
            add(Edge.make_bspline(
                [(4.347354039, 5.361923538), (4.336678458, 5.363096555), (4.311375089, 5.365876852), (4.266692338, 5.367662514), (4.20955971, 5.370407271), (4.139285669, 5.371528992), (4.056498042, 5.373495271), (3.960867626, 5.373856329), (3.852698247, 5.375009885), (3.776307493, 5.374835906), (3.735975834, 5.374744051)],
                knots=[0, 0, 0, 0, 0.42127143, 0.998501726, 1.753681744, 2.66564073, 3.755712164, 5.002818897, 6.417592707, 8, 8, 8, 8], degree=3))
            Line((3.735975834, 5.374744051), (3.08212968, 5.374744051))
            Line((3.08212968, 5.374744051), (3.08212968, 4.400385076))
        make_face(mode=Mode.SUBTRACT)
    extrude(amount=-CUT_EXTRUDE4_DEPTH, mode=Mode.SUBTRACT)


solid = part.part
